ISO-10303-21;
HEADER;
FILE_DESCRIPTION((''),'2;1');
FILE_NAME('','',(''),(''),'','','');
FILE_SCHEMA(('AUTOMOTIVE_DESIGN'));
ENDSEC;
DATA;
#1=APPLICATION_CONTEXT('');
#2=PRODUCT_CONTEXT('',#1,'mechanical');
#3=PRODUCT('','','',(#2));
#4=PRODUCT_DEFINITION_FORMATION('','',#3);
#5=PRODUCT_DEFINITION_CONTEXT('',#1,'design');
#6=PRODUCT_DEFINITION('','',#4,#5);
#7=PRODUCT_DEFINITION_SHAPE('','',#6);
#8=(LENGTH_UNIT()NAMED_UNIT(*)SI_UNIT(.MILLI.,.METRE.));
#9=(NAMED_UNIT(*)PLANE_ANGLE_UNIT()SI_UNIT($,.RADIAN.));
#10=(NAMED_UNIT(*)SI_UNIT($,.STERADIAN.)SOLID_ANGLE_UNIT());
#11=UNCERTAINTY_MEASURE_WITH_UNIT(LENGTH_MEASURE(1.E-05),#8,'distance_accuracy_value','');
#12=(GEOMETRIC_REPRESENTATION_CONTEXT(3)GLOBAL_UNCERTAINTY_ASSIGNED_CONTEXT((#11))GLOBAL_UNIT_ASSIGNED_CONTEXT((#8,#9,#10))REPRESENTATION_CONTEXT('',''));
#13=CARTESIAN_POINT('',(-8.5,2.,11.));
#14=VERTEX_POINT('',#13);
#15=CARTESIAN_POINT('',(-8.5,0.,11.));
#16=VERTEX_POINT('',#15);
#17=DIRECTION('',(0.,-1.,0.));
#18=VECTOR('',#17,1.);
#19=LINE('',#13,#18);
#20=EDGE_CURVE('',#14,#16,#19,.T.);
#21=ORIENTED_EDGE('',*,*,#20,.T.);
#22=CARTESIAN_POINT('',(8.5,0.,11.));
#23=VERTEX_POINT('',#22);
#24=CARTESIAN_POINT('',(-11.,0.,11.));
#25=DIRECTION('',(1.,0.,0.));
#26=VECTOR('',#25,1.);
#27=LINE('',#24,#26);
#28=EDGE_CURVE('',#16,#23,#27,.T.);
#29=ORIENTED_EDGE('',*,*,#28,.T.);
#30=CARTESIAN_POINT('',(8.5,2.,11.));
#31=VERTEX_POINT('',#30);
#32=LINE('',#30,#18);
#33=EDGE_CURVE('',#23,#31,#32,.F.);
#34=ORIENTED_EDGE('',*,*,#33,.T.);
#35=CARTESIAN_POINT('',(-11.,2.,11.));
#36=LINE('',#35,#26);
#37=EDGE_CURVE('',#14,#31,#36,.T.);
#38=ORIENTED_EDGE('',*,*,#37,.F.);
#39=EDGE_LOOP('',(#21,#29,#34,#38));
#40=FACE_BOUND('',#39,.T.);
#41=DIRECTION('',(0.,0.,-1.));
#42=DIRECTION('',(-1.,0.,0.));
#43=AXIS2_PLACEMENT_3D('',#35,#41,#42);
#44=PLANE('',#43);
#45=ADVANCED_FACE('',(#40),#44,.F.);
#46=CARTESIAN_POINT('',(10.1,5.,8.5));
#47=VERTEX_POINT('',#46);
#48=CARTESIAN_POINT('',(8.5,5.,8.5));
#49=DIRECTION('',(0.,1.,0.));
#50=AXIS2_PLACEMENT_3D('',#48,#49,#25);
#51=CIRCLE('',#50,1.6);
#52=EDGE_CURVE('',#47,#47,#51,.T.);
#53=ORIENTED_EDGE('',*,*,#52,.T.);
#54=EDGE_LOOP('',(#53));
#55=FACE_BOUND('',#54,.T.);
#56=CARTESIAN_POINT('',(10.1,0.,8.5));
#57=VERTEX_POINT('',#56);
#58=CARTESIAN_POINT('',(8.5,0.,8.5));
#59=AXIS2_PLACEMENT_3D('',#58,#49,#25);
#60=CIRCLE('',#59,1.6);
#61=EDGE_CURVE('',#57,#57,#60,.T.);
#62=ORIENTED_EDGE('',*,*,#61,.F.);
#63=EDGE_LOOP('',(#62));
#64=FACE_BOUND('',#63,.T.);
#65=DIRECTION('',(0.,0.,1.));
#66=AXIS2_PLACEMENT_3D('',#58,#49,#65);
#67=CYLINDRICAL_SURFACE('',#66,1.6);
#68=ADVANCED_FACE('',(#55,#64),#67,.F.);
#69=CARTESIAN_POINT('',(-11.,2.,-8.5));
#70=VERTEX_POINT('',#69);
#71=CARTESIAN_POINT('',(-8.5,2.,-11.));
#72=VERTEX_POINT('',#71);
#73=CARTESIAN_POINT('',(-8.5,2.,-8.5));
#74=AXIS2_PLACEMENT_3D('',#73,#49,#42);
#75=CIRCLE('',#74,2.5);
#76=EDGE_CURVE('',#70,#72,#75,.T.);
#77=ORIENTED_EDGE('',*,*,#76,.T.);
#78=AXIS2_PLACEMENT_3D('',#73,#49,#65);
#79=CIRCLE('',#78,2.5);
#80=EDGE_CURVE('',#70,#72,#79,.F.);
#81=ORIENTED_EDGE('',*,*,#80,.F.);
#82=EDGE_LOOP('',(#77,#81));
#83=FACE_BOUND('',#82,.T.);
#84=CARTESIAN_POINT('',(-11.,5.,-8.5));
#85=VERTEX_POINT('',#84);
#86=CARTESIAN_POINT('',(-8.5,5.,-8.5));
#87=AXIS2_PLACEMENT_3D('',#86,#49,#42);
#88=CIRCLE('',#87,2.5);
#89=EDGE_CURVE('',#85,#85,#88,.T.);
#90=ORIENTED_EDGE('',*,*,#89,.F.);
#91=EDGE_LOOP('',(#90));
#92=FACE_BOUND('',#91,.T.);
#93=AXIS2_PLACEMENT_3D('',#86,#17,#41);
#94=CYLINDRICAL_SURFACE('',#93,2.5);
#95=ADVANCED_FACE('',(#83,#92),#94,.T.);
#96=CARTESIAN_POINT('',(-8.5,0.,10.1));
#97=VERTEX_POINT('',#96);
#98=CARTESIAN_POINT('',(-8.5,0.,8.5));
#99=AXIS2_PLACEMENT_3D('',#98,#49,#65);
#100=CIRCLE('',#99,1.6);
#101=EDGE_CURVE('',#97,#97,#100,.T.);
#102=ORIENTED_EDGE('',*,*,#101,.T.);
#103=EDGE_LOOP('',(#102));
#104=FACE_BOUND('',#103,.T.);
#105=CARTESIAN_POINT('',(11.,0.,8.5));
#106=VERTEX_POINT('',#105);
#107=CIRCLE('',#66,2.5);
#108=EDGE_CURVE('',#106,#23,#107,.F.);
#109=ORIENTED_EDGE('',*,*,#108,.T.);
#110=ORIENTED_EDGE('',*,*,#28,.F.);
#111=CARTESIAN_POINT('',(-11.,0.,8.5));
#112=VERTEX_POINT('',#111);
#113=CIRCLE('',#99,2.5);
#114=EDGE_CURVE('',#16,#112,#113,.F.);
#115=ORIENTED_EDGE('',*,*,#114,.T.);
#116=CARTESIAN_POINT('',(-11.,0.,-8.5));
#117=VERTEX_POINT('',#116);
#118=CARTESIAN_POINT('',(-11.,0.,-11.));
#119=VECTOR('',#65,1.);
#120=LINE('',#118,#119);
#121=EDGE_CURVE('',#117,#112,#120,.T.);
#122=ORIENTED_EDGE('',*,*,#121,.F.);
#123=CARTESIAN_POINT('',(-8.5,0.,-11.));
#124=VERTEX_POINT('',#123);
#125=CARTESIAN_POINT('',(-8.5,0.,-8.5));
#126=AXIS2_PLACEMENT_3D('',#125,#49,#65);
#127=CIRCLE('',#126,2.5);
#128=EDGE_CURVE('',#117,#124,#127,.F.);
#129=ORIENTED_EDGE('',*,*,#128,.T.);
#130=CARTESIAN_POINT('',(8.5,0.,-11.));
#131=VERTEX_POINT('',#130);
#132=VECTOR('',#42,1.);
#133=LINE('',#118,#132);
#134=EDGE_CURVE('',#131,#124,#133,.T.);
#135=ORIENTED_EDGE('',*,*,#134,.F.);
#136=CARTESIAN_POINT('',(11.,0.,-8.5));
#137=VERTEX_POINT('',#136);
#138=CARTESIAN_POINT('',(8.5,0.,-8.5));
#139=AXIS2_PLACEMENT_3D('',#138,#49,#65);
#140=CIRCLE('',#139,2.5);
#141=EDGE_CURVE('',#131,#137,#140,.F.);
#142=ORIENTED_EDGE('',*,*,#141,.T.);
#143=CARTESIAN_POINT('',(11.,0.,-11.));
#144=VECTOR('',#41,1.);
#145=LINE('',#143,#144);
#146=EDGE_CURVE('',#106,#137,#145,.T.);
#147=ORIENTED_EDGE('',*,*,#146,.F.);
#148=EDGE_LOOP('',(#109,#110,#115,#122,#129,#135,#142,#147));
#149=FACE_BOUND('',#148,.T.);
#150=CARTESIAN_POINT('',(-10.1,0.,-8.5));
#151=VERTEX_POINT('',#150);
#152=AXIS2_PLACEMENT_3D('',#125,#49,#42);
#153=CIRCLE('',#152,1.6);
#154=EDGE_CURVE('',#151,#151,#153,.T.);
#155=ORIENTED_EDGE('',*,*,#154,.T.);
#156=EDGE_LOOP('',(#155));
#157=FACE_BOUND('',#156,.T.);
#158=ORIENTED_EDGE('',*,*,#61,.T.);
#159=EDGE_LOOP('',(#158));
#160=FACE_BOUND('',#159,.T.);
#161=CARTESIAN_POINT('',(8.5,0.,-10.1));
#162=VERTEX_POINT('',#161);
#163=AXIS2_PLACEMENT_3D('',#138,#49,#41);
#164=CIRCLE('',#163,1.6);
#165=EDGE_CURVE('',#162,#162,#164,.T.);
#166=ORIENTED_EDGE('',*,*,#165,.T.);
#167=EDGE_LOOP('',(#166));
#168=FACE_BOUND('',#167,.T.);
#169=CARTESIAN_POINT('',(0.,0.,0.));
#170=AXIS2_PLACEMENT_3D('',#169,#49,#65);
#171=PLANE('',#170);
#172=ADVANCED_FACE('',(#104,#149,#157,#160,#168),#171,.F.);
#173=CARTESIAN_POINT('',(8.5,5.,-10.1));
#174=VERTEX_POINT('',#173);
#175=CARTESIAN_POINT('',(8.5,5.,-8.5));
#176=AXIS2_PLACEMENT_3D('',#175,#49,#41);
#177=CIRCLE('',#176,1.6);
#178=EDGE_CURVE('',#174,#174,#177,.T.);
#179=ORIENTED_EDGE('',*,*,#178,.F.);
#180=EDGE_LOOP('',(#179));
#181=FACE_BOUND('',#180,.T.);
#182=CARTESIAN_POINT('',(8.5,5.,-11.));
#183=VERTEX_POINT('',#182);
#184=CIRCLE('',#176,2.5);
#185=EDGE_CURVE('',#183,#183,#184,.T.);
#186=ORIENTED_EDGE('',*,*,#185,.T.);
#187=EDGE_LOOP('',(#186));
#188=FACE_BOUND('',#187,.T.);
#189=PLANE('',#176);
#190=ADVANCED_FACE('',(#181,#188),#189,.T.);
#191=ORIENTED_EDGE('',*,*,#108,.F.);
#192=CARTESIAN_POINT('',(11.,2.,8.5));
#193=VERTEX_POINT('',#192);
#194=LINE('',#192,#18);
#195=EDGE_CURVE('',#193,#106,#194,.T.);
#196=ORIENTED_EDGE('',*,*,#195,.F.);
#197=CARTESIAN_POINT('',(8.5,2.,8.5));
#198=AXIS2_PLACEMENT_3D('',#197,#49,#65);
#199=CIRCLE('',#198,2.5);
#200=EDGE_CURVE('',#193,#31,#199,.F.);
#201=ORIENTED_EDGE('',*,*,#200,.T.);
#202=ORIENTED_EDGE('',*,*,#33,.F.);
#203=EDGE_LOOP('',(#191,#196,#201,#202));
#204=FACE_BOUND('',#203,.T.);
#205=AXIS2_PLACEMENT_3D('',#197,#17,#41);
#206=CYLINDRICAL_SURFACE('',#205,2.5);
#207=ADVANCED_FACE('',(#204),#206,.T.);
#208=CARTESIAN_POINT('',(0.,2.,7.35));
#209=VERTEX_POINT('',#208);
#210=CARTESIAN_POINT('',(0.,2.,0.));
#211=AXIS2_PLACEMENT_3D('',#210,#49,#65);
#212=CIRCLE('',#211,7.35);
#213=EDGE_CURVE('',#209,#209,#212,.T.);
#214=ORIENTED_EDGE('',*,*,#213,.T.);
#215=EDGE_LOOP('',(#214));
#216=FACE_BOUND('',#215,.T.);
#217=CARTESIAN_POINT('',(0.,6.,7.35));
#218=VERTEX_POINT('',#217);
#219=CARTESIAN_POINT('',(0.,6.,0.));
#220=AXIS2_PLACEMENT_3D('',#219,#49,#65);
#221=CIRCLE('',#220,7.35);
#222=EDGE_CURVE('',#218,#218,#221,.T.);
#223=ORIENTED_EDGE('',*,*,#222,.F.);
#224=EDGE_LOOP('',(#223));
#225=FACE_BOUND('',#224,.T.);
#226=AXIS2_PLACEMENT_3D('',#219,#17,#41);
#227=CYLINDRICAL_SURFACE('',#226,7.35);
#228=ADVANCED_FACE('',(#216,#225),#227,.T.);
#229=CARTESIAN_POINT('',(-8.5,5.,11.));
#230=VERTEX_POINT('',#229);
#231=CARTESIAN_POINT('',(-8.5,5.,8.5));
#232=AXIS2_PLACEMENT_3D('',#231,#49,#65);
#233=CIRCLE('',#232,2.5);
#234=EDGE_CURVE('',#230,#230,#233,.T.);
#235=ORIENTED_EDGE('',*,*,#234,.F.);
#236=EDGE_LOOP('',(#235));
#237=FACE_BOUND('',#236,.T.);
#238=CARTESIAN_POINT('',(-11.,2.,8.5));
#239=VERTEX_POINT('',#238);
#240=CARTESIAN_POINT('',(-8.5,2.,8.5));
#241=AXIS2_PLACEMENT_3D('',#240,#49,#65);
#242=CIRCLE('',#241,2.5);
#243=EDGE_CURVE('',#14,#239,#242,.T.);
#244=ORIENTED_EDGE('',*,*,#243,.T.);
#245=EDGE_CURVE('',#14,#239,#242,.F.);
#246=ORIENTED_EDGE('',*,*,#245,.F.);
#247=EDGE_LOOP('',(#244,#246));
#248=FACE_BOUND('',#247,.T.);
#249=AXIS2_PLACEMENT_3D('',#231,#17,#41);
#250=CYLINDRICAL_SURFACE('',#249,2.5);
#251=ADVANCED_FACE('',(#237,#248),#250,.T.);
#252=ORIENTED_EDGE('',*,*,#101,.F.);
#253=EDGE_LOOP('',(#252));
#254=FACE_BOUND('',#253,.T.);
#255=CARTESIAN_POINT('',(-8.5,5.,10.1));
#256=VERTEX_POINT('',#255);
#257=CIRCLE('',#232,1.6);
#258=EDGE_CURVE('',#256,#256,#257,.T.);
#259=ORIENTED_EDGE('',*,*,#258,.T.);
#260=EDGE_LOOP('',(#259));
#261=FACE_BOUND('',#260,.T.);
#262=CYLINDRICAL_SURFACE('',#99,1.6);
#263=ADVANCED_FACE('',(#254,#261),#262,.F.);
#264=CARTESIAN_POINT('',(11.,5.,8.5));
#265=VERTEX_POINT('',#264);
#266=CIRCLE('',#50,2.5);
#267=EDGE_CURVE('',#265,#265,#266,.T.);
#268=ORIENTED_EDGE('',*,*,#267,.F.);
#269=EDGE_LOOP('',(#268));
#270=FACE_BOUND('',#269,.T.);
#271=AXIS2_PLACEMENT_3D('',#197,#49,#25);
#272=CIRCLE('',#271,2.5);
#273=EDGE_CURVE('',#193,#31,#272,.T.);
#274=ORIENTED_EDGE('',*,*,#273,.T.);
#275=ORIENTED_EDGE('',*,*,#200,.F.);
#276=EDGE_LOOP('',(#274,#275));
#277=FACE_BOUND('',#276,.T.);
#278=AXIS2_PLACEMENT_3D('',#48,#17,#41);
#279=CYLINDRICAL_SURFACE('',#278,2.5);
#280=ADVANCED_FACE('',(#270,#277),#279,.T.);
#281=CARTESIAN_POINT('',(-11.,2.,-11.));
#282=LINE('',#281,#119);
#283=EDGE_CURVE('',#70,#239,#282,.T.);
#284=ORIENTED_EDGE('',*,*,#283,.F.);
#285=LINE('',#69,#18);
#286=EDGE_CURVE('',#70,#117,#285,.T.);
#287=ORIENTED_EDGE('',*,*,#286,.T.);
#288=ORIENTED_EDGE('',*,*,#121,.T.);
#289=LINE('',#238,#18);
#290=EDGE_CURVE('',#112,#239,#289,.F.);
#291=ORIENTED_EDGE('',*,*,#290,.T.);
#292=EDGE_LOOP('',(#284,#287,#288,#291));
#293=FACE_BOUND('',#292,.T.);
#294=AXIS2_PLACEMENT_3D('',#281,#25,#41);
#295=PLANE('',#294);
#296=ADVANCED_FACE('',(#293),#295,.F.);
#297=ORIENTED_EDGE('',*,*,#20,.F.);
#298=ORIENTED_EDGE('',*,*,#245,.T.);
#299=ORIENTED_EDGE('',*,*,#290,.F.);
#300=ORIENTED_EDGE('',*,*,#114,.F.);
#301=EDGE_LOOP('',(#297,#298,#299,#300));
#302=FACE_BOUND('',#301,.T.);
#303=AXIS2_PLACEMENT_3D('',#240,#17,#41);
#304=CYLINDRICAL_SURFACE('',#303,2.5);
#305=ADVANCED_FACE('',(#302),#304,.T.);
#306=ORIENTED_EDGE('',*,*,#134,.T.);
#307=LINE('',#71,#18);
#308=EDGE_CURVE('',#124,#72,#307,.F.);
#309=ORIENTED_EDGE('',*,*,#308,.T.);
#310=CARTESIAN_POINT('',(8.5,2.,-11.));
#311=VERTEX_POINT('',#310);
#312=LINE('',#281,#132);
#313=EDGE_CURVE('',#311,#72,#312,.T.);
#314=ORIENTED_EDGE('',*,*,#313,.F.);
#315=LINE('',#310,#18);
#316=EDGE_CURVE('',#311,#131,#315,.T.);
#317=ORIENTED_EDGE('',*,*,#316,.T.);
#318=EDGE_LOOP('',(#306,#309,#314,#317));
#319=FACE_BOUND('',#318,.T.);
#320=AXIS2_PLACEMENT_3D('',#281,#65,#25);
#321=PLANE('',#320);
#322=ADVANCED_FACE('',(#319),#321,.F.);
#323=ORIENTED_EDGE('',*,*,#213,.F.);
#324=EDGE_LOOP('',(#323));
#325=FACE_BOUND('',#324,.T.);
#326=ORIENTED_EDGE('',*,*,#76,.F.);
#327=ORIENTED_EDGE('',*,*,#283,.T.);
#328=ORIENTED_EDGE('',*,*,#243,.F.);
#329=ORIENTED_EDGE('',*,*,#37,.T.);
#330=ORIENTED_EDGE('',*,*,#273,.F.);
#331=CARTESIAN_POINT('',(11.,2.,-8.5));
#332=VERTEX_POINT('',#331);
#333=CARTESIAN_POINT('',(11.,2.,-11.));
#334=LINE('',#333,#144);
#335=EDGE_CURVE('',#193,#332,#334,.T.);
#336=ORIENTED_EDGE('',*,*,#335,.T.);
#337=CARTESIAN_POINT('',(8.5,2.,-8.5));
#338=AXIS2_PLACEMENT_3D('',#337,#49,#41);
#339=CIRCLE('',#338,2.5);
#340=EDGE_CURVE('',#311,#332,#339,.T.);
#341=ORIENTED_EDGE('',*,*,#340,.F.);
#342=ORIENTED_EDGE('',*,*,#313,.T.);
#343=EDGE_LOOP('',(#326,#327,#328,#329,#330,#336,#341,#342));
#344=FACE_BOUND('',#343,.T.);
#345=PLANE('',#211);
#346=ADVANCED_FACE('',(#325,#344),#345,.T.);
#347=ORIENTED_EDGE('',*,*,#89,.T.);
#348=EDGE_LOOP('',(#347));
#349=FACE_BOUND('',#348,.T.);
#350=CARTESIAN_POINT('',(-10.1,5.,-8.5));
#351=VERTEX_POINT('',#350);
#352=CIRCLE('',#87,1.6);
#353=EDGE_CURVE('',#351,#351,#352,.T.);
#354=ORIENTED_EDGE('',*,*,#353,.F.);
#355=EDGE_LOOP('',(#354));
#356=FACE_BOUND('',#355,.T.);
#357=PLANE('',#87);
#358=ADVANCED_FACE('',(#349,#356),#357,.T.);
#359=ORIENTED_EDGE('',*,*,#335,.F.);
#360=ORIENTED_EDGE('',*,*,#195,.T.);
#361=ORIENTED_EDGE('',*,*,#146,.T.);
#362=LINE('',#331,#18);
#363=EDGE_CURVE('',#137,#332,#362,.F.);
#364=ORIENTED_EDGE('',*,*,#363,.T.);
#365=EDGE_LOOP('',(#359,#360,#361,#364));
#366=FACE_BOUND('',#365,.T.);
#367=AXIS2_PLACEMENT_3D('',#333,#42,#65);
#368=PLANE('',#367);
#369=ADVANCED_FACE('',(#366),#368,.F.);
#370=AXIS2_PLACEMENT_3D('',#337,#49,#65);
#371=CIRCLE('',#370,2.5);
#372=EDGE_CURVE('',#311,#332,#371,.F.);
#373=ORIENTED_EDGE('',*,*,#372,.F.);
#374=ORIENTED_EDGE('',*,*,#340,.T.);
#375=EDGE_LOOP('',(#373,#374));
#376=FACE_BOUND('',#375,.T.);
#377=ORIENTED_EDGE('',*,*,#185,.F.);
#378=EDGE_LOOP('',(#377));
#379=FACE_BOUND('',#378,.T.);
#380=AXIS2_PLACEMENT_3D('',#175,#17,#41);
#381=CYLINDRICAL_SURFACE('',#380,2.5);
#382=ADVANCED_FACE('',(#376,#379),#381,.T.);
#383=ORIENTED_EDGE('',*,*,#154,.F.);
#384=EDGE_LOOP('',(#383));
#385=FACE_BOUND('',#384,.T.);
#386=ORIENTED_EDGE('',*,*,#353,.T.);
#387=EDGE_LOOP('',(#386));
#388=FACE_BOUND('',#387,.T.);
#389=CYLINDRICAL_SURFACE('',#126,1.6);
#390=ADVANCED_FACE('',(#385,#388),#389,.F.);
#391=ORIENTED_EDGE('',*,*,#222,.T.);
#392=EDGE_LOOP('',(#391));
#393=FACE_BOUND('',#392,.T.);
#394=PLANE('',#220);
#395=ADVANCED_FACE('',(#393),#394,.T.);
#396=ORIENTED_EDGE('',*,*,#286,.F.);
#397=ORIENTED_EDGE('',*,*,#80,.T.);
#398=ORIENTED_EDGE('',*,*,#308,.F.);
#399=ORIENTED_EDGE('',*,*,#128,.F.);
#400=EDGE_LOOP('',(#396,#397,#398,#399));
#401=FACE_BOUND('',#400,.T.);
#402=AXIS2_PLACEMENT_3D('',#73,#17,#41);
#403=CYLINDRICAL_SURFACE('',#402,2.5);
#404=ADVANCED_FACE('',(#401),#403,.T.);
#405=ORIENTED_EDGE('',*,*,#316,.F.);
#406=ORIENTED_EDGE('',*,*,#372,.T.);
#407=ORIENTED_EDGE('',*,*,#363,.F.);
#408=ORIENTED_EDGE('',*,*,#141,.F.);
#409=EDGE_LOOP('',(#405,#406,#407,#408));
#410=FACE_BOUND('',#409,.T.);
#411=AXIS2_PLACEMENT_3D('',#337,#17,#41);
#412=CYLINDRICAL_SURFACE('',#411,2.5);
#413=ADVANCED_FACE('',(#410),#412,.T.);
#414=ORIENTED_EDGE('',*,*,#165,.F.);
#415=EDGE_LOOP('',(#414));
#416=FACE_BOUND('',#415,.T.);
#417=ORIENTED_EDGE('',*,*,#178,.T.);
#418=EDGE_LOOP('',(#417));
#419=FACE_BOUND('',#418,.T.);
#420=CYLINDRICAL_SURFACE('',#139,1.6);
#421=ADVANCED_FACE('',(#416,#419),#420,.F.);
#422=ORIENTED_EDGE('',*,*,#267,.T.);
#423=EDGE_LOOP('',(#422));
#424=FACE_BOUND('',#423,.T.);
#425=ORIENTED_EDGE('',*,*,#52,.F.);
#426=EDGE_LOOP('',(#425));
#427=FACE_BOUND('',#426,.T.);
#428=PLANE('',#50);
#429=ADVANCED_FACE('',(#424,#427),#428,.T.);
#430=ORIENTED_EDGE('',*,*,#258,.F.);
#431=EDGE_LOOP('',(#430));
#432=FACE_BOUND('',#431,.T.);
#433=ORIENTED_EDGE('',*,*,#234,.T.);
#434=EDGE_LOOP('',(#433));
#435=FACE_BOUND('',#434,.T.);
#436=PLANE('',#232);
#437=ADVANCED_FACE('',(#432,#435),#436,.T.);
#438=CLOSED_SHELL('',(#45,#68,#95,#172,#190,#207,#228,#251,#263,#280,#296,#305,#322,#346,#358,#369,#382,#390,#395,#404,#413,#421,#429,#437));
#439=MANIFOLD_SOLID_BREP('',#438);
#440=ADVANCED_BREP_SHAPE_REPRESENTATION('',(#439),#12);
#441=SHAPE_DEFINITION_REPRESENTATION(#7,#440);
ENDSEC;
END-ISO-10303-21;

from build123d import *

# Parameters (mm, degrees)
SKETCH1_W           = 22
SKETCH1_H           = 22
BOSS_EXTRUDE1_DEPTH = 2
SKETCH2_R           = 7.35
BOSS_EXTRUDE2_DEPTH = 4
SKETCH3_R           = 2.5
BOSS_EXTRUDE3_DEPTH = 3
SKETCH4_R           = 1.6
CUT_EXTRUDE1_DEPTH  = 17.340134638
CIRPATTERN1_COUNT   = 4
FILLET1_R           = 2.5


with BuildPart() as part:
    # Sketch1 → Boss-Extrude1 (new body)
    with BuildSketch(Plane(origin=(0, 0, 0), x_dir=(1, 0, 0), z_dir=(0, 1, 0))):
        Rectangle(SKETCH1_W, SKETCH1_H)
    extrude(amount=BOSS_EXTRUDE1_DEPTH)

    # Sketch2 → Boss-Extrude2 (add)
    with BuildSketch(Plane(origin=(0, 2, 0), x_dir=(1, 0, 0), z_dir=(0, 1, 0))):
        Circle(SKETCH2_R)
    extrude(amount=BOSS_EXTRUDE2_DEPTH)

    # Sketch3 → Boss-Extrude3 (add)
    with BuildSketch(Plane(origin=(0, 2, 0), x_dir=(1, 0, 0), z_dir=(0, 1, 0))):
        with Locations((-8.5, -8.5)):
            Circle(SKETCH3_R)
    boss_extrude3 = extrude(amount=BOSS_EXTRUDE3_DEPTH)

    # Sketch4 → Cut-Extrude1 (cut, through all)
    with BuildSketch(Plane(origin=(0, 5, 0), x_dir=(1, 0, 0), z_dir=(0, 1, 0))):
        with Locations((-8.5, -8.5)):
            Circle(SKETCH4_R)
    cut_extrude1 = extrude(amount=-CUT_EXTRUDE1_DEPTH, mode=Mode.SUBTRACT)

    # CirPattern1: Boss-Extrude3, Cut-Extrude1 ×4 about axis
    cirpattern1_axis = Axis((0, 6, 0), (0, -1, 0))
    add([boss_extrude3.rotate(cirpattern1_axis, i * 360 / CIRPATTERN1_COUNT) for i in range(1, CIRPATTERN1_COUNT)])
    add([cut_extrude1.rotate(cirpattern1_axis, i * 360 / CIRPATTERN1_COUNT) for i in range(1, CIRPATTERN1_COUNT)], mode=Mode.SUBTRACT)

    # Fillet1
    fillet1_edges = [part.edges().sort_by_distance(p)[0] for p in [
        (11, 1, -11),
        (-11, 1, -11),
        (11, 1, 11),
        (-11, 1, 11),
    ]]
    fillet(fillet1_edges, radius=FILLET1_R)


solid = part.part
